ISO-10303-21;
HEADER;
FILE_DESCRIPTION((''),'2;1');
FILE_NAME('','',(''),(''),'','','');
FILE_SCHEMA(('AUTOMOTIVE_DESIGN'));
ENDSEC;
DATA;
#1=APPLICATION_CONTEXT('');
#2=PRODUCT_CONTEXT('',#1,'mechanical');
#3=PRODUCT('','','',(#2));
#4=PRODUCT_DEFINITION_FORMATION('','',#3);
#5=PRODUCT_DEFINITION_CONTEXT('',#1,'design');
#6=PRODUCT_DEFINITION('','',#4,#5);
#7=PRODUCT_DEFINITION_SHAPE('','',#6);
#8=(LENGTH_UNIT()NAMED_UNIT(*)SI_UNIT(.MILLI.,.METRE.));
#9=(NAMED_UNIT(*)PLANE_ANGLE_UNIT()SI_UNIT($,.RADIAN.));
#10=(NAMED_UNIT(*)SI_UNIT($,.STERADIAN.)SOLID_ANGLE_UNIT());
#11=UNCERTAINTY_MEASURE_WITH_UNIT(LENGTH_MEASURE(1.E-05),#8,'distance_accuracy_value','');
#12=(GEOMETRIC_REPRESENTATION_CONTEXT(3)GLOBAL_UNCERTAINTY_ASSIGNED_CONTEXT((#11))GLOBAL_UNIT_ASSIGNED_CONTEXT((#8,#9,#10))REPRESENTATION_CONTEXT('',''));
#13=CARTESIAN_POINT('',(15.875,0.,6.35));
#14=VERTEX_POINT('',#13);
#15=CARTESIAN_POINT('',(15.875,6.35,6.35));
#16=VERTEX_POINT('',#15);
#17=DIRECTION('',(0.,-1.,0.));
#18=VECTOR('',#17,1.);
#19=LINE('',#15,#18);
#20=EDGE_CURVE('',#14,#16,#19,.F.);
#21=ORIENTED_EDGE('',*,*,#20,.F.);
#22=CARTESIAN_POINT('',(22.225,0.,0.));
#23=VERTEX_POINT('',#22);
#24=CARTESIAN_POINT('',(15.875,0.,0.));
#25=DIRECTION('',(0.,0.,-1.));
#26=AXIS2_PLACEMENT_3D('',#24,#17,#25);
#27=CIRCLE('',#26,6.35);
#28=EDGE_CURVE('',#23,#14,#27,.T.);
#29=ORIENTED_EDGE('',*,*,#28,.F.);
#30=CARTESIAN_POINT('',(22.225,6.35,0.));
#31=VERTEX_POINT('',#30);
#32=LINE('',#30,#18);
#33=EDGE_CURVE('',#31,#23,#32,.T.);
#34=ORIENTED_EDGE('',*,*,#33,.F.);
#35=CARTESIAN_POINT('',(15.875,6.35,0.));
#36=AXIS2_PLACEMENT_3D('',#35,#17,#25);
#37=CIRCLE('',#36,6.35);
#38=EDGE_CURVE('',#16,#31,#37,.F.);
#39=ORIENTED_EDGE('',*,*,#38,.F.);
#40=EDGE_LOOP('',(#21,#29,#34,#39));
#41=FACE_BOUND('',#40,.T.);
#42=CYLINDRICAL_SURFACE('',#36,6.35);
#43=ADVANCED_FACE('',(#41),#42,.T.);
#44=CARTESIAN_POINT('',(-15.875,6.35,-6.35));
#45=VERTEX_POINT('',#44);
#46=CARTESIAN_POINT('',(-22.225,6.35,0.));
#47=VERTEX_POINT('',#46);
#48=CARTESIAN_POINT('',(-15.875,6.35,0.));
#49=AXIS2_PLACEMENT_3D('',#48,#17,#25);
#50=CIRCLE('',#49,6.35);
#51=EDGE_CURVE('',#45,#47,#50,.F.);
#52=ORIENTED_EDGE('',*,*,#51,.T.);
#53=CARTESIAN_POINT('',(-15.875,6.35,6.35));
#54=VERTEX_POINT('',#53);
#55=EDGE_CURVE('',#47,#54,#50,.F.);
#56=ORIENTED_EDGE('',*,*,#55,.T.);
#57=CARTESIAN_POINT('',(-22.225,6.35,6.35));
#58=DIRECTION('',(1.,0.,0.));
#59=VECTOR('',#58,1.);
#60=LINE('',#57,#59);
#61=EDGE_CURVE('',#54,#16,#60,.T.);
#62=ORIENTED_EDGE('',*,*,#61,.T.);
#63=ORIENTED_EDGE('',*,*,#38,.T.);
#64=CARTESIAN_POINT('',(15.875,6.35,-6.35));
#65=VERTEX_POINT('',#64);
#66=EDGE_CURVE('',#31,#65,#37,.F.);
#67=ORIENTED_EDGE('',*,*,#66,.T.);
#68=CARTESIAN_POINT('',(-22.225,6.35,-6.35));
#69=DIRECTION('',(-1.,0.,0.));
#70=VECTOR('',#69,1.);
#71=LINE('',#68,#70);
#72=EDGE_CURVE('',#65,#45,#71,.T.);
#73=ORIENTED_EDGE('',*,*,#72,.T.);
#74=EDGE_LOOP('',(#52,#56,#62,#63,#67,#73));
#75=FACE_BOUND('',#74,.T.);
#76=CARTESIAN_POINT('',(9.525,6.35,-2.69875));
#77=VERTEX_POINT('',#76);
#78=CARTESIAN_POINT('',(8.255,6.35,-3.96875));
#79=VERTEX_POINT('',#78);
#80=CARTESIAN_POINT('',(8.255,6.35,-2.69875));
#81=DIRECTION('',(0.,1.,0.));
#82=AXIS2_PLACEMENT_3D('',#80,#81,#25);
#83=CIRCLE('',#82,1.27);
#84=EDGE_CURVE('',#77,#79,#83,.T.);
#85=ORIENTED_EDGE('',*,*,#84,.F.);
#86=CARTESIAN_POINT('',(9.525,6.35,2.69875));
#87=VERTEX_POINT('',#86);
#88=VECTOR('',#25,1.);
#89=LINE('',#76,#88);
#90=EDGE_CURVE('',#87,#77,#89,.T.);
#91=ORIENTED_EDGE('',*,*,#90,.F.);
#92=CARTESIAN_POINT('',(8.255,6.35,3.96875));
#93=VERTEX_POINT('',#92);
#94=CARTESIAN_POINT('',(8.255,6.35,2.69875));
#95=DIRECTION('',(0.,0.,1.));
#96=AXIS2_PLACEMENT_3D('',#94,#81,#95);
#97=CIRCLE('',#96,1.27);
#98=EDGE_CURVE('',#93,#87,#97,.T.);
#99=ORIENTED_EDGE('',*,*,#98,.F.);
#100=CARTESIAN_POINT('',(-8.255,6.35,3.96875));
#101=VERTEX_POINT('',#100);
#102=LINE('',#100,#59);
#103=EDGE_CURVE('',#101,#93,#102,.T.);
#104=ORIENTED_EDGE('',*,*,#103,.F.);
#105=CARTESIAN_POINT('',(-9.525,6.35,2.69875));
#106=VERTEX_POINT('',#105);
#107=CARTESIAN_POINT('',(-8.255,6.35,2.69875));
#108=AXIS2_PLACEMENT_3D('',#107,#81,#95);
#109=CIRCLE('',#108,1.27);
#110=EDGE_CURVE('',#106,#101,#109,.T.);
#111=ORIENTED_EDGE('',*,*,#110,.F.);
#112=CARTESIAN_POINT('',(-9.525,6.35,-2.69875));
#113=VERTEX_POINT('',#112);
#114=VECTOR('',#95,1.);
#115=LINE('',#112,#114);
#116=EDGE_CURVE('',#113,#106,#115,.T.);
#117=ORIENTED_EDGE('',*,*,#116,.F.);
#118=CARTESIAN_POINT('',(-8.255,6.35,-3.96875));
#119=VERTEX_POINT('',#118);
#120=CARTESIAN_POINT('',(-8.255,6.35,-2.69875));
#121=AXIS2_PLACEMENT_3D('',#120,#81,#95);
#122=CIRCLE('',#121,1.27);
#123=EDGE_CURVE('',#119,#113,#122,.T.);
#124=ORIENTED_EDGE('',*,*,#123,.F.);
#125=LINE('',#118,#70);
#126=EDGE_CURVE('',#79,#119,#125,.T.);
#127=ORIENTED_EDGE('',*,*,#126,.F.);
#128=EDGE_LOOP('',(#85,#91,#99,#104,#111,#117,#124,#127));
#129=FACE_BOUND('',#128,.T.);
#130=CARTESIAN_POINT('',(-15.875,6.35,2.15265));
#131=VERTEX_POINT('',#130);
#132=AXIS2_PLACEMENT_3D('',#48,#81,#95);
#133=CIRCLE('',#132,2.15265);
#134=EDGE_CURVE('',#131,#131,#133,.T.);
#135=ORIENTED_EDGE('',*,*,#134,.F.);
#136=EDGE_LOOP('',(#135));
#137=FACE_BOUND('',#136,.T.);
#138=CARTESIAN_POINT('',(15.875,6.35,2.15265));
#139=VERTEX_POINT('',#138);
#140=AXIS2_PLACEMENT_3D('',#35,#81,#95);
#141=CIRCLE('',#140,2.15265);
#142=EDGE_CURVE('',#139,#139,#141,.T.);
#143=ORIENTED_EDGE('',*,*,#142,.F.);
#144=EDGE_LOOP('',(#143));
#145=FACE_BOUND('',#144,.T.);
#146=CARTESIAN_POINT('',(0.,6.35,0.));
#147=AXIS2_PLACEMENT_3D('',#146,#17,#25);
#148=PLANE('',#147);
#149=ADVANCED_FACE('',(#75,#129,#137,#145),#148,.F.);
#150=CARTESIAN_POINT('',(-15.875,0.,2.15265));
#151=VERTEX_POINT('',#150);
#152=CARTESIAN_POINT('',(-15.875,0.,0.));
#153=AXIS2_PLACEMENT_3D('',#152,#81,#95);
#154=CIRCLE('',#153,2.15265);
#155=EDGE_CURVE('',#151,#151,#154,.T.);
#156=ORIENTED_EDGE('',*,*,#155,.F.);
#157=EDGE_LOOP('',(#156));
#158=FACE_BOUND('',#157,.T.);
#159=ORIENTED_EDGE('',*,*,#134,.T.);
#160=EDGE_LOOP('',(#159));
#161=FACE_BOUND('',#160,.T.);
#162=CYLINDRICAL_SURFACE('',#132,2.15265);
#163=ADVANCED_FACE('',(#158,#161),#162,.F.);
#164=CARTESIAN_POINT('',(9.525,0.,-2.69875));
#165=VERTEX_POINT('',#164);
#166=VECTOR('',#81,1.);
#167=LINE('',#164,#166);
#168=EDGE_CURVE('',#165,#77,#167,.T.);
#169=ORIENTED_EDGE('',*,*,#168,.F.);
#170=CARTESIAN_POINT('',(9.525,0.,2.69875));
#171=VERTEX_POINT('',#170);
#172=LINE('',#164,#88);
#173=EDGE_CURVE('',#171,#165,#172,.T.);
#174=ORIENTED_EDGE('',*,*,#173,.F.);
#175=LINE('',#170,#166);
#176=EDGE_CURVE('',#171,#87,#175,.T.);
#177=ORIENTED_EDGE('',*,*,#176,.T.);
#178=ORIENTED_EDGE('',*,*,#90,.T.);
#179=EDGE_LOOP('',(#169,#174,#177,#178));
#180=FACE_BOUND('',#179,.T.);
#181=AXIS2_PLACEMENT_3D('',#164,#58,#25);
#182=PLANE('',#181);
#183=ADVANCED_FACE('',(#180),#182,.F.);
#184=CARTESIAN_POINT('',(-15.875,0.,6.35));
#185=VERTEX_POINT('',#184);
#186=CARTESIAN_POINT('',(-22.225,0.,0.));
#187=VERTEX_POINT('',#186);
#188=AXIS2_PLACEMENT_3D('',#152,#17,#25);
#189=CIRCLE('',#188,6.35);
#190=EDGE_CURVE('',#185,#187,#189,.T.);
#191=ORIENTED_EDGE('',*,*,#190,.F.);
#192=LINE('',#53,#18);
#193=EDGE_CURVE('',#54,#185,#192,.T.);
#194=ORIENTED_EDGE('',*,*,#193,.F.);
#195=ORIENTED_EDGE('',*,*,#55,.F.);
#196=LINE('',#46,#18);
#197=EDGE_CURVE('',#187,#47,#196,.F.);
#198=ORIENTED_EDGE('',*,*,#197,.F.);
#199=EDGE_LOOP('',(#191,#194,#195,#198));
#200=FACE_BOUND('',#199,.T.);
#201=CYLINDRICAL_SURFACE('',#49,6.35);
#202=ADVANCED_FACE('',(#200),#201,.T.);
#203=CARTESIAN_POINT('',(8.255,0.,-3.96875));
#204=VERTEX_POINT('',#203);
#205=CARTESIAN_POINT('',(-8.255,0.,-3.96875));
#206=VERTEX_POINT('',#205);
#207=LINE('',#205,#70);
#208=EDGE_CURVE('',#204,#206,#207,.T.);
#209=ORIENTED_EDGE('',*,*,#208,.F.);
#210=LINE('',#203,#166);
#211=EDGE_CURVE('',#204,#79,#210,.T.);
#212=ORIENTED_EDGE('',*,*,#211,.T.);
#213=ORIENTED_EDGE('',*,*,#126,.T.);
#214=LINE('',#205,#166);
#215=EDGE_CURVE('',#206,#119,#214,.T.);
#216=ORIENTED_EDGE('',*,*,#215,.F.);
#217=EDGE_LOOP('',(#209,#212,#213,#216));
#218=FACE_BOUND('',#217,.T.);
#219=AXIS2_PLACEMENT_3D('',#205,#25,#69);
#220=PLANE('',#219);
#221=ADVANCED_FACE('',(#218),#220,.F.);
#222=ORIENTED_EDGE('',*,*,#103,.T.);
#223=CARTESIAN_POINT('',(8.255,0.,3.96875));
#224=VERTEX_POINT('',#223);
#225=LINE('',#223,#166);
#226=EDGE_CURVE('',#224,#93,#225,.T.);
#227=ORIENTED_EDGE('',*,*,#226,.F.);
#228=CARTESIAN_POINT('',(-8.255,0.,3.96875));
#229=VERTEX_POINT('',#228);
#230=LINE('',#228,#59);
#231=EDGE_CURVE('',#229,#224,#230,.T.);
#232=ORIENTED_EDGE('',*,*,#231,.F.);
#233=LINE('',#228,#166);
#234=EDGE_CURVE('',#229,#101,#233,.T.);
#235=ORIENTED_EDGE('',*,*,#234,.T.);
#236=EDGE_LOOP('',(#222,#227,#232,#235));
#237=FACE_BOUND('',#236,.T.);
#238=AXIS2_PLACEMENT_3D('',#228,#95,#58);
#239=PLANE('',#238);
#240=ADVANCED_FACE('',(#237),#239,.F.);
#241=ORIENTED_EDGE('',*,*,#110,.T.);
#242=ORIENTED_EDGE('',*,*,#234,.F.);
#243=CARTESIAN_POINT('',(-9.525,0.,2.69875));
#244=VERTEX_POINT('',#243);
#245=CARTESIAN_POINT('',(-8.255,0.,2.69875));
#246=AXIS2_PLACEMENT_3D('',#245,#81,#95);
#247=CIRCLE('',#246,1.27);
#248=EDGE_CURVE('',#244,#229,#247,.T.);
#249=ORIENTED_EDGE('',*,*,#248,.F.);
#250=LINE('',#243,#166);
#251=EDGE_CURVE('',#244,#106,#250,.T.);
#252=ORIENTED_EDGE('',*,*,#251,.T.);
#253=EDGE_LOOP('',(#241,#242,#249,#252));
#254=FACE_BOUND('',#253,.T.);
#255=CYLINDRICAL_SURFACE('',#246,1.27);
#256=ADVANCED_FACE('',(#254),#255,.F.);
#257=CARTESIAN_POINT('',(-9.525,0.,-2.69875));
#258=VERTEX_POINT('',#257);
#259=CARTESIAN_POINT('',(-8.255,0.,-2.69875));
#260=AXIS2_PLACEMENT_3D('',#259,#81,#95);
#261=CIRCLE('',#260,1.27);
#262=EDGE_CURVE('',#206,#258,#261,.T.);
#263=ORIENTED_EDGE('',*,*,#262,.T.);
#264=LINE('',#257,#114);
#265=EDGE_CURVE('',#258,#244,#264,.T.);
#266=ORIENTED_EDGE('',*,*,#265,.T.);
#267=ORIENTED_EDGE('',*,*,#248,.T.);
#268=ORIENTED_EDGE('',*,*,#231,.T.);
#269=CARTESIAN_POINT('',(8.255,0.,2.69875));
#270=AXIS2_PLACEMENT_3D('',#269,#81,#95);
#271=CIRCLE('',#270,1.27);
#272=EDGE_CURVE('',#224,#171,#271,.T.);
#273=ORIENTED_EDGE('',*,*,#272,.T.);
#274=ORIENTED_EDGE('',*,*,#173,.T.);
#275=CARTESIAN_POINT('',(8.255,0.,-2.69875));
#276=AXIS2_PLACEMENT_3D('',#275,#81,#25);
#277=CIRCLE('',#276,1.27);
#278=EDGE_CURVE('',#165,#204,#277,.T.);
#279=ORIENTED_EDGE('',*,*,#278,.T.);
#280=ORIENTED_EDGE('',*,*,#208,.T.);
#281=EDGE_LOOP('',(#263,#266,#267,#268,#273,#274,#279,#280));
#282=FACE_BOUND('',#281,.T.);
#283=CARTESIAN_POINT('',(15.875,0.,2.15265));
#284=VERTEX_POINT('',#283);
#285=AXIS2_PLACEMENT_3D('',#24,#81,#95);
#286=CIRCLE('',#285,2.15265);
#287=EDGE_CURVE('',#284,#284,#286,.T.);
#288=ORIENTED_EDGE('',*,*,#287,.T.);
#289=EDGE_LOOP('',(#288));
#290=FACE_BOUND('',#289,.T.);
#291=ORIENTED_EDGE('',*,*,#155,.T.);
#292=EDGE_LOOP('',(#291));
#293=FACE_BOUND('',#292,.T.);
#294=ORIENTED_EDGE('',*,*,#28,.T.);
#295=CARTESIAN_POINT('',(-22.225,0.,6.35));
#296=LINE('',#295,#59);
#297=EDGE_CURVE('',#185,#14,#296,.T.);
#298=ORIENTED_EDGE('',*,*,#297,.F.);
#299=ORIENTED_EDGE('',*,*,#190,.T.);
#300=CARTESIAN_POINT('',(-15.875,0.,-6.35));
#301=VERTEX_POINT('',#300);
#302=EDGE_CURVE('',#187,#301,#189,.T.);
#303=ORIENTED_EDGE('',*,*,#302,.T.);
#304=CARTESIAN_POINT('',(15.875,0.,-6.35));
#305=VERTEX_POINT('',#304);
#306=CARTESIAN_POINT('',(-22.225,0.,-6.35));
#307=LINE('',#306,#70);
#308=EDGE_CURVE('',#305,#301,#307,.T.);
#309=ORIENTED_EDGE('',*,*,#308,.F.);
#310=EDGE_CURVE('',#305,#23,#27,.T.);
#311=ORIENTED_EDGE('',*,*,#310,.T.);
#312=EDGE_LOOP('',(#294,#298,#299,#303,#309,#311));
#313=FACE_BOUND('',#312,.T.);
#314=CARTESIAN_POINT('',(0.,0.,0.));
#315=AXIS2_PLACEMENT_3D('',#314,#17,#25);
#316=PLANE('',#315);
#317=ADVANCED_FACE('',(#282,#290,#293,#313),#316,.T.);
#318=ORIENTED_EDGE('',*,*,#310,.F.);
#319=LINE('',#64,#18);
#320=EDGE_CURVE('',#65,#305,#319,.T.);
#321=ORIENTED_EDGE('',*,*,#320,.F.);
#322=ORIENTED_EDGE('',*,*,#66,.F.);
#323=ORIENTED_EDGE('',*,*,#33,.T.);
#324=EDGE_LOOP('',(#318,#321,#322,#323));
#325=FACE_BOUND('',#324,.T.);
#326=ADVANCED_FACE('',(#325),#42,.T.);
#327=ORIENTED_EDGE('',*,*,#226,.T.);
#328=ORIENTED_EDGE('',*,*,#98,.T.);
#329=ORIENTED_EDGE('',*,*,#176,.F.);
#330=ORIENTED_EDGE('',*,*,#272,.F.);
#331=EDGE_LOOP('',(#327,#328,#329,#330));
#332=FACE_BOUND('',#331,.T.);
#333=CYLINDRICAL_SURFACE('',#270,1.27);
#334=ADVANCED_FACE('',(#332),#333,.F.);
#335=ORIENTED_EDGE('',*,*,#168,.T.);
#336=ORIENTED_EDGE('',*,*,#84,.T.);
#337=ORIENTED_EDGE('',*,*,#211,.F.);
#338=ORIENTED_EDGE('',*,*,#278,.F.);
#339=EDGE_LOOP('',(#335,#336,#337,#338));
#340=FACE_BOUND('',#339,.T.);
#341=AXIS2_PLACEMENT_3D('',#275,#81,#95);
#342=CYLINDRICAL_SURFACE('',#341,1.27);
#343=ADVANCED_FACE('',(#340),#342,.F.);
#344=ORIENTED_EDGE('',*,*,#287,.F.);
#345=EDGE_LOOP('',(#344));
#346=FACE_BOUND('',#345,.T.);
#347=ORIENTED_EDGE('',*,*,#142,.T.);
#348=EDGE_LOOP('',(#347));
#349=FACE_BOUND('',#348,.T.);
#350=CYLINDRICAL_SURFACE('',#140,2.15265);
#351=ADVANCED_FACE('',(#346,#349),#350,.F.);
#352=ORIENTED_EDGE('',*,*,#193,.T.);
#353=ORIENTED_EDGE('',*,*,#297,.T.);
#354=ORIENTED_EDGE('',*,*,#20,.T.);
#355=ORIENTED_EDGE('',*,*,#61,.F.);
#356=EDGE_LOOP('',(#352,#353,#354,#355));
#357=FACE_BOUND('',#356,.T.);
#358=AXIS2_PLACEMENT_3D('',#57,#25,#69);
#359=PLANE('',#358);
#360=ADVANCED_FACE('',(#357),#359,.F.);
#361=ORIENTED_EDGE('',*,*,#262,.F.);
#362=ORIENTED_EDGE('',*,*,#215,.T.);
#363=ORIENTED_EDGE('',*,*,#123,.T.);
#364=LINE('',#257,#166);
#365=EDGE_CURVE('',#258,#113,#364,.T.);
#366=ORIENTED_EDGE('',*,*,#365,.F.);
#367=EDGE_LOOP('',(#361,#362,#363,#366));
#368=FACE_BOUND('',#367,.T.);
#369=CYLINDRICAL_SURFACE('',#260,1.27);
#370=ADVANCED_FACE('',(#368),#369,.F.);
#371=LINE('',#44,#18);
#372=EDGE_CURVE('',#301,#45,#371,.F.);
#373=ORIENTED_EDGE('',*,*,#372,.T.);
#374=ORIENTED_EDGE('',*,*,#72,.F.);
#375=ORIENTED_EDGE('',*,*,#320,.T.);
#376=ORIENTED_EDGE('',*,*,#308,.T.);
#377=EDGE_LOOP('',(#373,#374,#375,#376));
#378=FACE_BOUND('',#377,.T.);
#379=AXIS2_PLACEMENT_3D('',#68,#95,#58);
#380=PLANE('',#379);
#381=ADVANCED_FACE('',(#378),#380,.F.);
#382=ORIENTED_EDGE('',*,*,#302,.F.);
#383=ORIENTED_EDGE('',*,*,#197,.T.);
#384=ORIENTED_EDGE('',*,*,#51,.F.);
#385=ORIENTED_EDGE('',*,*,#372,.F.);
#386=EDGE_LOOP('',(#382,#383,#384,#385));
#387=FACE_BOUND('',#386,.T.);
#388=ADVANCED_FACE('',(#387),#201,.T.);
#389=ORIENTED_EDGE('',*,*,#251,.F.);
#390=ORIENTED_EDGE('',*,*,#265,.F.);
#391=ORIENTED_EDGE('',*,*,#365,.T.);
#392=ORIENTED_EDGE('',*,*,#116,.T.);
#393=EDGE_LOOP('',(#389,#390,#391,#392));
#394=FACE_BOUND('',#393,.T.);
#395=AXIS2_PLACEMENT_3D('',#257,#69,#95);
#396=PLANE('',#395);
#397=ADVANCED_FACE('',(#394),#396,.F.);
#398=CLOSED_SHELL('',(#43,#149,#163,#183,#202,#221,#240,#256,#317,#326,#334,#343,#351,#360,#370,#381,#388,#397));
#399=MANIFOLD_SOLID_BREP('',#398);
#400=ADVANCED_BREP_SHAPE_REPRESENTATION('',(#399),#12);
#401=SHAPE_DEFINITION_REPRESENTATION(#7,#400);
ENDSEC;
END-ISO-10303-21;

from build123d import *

# Parameters (mm, degrees)
SKETCH1_W                    = 44.45
SKETCH1_H                    = 12.7
BOSS_EXTRUDE4_DEPTH          = 6.35
FILLET3_R                    = 6.35
F_18_0_1695_DIAMETER_HOLE2_D = 4.3053
CUT_EXTRUDE1_DEPTH           = 6.35


with BuildPart() as part:
    # Sketch1 → Boss-Extrude4 (new body)
    with BuildSketch(Plane(origin=(0, 0, 0), x_dir=(1, 0, 0), z_dir=(0, 1, 0))):
        Rectangle(SKETCH1_W, SKETCH1_H)
    extrude(amount=BOSS_EXTRUDE4_DEPTH)

    # Fillet3
    fillet3_edges = [part.edges().sort_by_distance(p)[0] for p in [
        (22.225, 3.175, -6.35),
        (22.225, 3.175, 6.35),
        (-22.225, 3.175, -6.35),
        (-22.225, 3.175, 6.35),
    ]]
    fillet(fillet3_edges, radius=FILLET3_R - 0.0001)  # a hair under: the kernel refuses the full size

    # #18 (0.1695) Diameter Hole2 (through all)
    with Locations(Plane(origin=(0, 6.35, 0), x_dir=(1, 0, 0), z_dir=(0, 1, 0))):
        with Locations((-15.875, 0), (15.875, 0)):
            Hole(F_18_0_1695_DIAMETER_HOLE2_D / 2)

    # Sketch10 → Cut-Extrude1 (cut)
    with BuildSketch(Plane(origin=(0, 6.35, 0), x_dir=(1, 0, 0), z_dir=(0, 1, 0))):
        with BuildLine():
            Line((-8.255, 3.96875), (8.255, 3.96875))
            ThreePointArc((8.255, 3.96875), (9.153025612, 3.596775612), (9.525, 2.69875))
            Line((9.525, 2.69875), (9.525, -2.69875))
            ThreePointArc((9.525, -2.69875), (9.153025612, -3.596775612), (8.255, -3.96875))
            Line((8.255, -3.96875), (-8.255, -3.96875))
            ThreePointArc((-8.255, -3.96875), (-9.153025612, -3.596775612), (-9.525, -2.69875))
            Line((-9.525, -2.69875), (-9.525, 2.69875))
            ThreePointArc((-9.525, 2.69875), (-9.153025612, 3.596775612), (-8.255, 3.96875))
        make_face()
    extrude(amount=-CUT_EXTRUDE1_DEPTH, mode=Mode.SUBTRACT)


solid = part.part
